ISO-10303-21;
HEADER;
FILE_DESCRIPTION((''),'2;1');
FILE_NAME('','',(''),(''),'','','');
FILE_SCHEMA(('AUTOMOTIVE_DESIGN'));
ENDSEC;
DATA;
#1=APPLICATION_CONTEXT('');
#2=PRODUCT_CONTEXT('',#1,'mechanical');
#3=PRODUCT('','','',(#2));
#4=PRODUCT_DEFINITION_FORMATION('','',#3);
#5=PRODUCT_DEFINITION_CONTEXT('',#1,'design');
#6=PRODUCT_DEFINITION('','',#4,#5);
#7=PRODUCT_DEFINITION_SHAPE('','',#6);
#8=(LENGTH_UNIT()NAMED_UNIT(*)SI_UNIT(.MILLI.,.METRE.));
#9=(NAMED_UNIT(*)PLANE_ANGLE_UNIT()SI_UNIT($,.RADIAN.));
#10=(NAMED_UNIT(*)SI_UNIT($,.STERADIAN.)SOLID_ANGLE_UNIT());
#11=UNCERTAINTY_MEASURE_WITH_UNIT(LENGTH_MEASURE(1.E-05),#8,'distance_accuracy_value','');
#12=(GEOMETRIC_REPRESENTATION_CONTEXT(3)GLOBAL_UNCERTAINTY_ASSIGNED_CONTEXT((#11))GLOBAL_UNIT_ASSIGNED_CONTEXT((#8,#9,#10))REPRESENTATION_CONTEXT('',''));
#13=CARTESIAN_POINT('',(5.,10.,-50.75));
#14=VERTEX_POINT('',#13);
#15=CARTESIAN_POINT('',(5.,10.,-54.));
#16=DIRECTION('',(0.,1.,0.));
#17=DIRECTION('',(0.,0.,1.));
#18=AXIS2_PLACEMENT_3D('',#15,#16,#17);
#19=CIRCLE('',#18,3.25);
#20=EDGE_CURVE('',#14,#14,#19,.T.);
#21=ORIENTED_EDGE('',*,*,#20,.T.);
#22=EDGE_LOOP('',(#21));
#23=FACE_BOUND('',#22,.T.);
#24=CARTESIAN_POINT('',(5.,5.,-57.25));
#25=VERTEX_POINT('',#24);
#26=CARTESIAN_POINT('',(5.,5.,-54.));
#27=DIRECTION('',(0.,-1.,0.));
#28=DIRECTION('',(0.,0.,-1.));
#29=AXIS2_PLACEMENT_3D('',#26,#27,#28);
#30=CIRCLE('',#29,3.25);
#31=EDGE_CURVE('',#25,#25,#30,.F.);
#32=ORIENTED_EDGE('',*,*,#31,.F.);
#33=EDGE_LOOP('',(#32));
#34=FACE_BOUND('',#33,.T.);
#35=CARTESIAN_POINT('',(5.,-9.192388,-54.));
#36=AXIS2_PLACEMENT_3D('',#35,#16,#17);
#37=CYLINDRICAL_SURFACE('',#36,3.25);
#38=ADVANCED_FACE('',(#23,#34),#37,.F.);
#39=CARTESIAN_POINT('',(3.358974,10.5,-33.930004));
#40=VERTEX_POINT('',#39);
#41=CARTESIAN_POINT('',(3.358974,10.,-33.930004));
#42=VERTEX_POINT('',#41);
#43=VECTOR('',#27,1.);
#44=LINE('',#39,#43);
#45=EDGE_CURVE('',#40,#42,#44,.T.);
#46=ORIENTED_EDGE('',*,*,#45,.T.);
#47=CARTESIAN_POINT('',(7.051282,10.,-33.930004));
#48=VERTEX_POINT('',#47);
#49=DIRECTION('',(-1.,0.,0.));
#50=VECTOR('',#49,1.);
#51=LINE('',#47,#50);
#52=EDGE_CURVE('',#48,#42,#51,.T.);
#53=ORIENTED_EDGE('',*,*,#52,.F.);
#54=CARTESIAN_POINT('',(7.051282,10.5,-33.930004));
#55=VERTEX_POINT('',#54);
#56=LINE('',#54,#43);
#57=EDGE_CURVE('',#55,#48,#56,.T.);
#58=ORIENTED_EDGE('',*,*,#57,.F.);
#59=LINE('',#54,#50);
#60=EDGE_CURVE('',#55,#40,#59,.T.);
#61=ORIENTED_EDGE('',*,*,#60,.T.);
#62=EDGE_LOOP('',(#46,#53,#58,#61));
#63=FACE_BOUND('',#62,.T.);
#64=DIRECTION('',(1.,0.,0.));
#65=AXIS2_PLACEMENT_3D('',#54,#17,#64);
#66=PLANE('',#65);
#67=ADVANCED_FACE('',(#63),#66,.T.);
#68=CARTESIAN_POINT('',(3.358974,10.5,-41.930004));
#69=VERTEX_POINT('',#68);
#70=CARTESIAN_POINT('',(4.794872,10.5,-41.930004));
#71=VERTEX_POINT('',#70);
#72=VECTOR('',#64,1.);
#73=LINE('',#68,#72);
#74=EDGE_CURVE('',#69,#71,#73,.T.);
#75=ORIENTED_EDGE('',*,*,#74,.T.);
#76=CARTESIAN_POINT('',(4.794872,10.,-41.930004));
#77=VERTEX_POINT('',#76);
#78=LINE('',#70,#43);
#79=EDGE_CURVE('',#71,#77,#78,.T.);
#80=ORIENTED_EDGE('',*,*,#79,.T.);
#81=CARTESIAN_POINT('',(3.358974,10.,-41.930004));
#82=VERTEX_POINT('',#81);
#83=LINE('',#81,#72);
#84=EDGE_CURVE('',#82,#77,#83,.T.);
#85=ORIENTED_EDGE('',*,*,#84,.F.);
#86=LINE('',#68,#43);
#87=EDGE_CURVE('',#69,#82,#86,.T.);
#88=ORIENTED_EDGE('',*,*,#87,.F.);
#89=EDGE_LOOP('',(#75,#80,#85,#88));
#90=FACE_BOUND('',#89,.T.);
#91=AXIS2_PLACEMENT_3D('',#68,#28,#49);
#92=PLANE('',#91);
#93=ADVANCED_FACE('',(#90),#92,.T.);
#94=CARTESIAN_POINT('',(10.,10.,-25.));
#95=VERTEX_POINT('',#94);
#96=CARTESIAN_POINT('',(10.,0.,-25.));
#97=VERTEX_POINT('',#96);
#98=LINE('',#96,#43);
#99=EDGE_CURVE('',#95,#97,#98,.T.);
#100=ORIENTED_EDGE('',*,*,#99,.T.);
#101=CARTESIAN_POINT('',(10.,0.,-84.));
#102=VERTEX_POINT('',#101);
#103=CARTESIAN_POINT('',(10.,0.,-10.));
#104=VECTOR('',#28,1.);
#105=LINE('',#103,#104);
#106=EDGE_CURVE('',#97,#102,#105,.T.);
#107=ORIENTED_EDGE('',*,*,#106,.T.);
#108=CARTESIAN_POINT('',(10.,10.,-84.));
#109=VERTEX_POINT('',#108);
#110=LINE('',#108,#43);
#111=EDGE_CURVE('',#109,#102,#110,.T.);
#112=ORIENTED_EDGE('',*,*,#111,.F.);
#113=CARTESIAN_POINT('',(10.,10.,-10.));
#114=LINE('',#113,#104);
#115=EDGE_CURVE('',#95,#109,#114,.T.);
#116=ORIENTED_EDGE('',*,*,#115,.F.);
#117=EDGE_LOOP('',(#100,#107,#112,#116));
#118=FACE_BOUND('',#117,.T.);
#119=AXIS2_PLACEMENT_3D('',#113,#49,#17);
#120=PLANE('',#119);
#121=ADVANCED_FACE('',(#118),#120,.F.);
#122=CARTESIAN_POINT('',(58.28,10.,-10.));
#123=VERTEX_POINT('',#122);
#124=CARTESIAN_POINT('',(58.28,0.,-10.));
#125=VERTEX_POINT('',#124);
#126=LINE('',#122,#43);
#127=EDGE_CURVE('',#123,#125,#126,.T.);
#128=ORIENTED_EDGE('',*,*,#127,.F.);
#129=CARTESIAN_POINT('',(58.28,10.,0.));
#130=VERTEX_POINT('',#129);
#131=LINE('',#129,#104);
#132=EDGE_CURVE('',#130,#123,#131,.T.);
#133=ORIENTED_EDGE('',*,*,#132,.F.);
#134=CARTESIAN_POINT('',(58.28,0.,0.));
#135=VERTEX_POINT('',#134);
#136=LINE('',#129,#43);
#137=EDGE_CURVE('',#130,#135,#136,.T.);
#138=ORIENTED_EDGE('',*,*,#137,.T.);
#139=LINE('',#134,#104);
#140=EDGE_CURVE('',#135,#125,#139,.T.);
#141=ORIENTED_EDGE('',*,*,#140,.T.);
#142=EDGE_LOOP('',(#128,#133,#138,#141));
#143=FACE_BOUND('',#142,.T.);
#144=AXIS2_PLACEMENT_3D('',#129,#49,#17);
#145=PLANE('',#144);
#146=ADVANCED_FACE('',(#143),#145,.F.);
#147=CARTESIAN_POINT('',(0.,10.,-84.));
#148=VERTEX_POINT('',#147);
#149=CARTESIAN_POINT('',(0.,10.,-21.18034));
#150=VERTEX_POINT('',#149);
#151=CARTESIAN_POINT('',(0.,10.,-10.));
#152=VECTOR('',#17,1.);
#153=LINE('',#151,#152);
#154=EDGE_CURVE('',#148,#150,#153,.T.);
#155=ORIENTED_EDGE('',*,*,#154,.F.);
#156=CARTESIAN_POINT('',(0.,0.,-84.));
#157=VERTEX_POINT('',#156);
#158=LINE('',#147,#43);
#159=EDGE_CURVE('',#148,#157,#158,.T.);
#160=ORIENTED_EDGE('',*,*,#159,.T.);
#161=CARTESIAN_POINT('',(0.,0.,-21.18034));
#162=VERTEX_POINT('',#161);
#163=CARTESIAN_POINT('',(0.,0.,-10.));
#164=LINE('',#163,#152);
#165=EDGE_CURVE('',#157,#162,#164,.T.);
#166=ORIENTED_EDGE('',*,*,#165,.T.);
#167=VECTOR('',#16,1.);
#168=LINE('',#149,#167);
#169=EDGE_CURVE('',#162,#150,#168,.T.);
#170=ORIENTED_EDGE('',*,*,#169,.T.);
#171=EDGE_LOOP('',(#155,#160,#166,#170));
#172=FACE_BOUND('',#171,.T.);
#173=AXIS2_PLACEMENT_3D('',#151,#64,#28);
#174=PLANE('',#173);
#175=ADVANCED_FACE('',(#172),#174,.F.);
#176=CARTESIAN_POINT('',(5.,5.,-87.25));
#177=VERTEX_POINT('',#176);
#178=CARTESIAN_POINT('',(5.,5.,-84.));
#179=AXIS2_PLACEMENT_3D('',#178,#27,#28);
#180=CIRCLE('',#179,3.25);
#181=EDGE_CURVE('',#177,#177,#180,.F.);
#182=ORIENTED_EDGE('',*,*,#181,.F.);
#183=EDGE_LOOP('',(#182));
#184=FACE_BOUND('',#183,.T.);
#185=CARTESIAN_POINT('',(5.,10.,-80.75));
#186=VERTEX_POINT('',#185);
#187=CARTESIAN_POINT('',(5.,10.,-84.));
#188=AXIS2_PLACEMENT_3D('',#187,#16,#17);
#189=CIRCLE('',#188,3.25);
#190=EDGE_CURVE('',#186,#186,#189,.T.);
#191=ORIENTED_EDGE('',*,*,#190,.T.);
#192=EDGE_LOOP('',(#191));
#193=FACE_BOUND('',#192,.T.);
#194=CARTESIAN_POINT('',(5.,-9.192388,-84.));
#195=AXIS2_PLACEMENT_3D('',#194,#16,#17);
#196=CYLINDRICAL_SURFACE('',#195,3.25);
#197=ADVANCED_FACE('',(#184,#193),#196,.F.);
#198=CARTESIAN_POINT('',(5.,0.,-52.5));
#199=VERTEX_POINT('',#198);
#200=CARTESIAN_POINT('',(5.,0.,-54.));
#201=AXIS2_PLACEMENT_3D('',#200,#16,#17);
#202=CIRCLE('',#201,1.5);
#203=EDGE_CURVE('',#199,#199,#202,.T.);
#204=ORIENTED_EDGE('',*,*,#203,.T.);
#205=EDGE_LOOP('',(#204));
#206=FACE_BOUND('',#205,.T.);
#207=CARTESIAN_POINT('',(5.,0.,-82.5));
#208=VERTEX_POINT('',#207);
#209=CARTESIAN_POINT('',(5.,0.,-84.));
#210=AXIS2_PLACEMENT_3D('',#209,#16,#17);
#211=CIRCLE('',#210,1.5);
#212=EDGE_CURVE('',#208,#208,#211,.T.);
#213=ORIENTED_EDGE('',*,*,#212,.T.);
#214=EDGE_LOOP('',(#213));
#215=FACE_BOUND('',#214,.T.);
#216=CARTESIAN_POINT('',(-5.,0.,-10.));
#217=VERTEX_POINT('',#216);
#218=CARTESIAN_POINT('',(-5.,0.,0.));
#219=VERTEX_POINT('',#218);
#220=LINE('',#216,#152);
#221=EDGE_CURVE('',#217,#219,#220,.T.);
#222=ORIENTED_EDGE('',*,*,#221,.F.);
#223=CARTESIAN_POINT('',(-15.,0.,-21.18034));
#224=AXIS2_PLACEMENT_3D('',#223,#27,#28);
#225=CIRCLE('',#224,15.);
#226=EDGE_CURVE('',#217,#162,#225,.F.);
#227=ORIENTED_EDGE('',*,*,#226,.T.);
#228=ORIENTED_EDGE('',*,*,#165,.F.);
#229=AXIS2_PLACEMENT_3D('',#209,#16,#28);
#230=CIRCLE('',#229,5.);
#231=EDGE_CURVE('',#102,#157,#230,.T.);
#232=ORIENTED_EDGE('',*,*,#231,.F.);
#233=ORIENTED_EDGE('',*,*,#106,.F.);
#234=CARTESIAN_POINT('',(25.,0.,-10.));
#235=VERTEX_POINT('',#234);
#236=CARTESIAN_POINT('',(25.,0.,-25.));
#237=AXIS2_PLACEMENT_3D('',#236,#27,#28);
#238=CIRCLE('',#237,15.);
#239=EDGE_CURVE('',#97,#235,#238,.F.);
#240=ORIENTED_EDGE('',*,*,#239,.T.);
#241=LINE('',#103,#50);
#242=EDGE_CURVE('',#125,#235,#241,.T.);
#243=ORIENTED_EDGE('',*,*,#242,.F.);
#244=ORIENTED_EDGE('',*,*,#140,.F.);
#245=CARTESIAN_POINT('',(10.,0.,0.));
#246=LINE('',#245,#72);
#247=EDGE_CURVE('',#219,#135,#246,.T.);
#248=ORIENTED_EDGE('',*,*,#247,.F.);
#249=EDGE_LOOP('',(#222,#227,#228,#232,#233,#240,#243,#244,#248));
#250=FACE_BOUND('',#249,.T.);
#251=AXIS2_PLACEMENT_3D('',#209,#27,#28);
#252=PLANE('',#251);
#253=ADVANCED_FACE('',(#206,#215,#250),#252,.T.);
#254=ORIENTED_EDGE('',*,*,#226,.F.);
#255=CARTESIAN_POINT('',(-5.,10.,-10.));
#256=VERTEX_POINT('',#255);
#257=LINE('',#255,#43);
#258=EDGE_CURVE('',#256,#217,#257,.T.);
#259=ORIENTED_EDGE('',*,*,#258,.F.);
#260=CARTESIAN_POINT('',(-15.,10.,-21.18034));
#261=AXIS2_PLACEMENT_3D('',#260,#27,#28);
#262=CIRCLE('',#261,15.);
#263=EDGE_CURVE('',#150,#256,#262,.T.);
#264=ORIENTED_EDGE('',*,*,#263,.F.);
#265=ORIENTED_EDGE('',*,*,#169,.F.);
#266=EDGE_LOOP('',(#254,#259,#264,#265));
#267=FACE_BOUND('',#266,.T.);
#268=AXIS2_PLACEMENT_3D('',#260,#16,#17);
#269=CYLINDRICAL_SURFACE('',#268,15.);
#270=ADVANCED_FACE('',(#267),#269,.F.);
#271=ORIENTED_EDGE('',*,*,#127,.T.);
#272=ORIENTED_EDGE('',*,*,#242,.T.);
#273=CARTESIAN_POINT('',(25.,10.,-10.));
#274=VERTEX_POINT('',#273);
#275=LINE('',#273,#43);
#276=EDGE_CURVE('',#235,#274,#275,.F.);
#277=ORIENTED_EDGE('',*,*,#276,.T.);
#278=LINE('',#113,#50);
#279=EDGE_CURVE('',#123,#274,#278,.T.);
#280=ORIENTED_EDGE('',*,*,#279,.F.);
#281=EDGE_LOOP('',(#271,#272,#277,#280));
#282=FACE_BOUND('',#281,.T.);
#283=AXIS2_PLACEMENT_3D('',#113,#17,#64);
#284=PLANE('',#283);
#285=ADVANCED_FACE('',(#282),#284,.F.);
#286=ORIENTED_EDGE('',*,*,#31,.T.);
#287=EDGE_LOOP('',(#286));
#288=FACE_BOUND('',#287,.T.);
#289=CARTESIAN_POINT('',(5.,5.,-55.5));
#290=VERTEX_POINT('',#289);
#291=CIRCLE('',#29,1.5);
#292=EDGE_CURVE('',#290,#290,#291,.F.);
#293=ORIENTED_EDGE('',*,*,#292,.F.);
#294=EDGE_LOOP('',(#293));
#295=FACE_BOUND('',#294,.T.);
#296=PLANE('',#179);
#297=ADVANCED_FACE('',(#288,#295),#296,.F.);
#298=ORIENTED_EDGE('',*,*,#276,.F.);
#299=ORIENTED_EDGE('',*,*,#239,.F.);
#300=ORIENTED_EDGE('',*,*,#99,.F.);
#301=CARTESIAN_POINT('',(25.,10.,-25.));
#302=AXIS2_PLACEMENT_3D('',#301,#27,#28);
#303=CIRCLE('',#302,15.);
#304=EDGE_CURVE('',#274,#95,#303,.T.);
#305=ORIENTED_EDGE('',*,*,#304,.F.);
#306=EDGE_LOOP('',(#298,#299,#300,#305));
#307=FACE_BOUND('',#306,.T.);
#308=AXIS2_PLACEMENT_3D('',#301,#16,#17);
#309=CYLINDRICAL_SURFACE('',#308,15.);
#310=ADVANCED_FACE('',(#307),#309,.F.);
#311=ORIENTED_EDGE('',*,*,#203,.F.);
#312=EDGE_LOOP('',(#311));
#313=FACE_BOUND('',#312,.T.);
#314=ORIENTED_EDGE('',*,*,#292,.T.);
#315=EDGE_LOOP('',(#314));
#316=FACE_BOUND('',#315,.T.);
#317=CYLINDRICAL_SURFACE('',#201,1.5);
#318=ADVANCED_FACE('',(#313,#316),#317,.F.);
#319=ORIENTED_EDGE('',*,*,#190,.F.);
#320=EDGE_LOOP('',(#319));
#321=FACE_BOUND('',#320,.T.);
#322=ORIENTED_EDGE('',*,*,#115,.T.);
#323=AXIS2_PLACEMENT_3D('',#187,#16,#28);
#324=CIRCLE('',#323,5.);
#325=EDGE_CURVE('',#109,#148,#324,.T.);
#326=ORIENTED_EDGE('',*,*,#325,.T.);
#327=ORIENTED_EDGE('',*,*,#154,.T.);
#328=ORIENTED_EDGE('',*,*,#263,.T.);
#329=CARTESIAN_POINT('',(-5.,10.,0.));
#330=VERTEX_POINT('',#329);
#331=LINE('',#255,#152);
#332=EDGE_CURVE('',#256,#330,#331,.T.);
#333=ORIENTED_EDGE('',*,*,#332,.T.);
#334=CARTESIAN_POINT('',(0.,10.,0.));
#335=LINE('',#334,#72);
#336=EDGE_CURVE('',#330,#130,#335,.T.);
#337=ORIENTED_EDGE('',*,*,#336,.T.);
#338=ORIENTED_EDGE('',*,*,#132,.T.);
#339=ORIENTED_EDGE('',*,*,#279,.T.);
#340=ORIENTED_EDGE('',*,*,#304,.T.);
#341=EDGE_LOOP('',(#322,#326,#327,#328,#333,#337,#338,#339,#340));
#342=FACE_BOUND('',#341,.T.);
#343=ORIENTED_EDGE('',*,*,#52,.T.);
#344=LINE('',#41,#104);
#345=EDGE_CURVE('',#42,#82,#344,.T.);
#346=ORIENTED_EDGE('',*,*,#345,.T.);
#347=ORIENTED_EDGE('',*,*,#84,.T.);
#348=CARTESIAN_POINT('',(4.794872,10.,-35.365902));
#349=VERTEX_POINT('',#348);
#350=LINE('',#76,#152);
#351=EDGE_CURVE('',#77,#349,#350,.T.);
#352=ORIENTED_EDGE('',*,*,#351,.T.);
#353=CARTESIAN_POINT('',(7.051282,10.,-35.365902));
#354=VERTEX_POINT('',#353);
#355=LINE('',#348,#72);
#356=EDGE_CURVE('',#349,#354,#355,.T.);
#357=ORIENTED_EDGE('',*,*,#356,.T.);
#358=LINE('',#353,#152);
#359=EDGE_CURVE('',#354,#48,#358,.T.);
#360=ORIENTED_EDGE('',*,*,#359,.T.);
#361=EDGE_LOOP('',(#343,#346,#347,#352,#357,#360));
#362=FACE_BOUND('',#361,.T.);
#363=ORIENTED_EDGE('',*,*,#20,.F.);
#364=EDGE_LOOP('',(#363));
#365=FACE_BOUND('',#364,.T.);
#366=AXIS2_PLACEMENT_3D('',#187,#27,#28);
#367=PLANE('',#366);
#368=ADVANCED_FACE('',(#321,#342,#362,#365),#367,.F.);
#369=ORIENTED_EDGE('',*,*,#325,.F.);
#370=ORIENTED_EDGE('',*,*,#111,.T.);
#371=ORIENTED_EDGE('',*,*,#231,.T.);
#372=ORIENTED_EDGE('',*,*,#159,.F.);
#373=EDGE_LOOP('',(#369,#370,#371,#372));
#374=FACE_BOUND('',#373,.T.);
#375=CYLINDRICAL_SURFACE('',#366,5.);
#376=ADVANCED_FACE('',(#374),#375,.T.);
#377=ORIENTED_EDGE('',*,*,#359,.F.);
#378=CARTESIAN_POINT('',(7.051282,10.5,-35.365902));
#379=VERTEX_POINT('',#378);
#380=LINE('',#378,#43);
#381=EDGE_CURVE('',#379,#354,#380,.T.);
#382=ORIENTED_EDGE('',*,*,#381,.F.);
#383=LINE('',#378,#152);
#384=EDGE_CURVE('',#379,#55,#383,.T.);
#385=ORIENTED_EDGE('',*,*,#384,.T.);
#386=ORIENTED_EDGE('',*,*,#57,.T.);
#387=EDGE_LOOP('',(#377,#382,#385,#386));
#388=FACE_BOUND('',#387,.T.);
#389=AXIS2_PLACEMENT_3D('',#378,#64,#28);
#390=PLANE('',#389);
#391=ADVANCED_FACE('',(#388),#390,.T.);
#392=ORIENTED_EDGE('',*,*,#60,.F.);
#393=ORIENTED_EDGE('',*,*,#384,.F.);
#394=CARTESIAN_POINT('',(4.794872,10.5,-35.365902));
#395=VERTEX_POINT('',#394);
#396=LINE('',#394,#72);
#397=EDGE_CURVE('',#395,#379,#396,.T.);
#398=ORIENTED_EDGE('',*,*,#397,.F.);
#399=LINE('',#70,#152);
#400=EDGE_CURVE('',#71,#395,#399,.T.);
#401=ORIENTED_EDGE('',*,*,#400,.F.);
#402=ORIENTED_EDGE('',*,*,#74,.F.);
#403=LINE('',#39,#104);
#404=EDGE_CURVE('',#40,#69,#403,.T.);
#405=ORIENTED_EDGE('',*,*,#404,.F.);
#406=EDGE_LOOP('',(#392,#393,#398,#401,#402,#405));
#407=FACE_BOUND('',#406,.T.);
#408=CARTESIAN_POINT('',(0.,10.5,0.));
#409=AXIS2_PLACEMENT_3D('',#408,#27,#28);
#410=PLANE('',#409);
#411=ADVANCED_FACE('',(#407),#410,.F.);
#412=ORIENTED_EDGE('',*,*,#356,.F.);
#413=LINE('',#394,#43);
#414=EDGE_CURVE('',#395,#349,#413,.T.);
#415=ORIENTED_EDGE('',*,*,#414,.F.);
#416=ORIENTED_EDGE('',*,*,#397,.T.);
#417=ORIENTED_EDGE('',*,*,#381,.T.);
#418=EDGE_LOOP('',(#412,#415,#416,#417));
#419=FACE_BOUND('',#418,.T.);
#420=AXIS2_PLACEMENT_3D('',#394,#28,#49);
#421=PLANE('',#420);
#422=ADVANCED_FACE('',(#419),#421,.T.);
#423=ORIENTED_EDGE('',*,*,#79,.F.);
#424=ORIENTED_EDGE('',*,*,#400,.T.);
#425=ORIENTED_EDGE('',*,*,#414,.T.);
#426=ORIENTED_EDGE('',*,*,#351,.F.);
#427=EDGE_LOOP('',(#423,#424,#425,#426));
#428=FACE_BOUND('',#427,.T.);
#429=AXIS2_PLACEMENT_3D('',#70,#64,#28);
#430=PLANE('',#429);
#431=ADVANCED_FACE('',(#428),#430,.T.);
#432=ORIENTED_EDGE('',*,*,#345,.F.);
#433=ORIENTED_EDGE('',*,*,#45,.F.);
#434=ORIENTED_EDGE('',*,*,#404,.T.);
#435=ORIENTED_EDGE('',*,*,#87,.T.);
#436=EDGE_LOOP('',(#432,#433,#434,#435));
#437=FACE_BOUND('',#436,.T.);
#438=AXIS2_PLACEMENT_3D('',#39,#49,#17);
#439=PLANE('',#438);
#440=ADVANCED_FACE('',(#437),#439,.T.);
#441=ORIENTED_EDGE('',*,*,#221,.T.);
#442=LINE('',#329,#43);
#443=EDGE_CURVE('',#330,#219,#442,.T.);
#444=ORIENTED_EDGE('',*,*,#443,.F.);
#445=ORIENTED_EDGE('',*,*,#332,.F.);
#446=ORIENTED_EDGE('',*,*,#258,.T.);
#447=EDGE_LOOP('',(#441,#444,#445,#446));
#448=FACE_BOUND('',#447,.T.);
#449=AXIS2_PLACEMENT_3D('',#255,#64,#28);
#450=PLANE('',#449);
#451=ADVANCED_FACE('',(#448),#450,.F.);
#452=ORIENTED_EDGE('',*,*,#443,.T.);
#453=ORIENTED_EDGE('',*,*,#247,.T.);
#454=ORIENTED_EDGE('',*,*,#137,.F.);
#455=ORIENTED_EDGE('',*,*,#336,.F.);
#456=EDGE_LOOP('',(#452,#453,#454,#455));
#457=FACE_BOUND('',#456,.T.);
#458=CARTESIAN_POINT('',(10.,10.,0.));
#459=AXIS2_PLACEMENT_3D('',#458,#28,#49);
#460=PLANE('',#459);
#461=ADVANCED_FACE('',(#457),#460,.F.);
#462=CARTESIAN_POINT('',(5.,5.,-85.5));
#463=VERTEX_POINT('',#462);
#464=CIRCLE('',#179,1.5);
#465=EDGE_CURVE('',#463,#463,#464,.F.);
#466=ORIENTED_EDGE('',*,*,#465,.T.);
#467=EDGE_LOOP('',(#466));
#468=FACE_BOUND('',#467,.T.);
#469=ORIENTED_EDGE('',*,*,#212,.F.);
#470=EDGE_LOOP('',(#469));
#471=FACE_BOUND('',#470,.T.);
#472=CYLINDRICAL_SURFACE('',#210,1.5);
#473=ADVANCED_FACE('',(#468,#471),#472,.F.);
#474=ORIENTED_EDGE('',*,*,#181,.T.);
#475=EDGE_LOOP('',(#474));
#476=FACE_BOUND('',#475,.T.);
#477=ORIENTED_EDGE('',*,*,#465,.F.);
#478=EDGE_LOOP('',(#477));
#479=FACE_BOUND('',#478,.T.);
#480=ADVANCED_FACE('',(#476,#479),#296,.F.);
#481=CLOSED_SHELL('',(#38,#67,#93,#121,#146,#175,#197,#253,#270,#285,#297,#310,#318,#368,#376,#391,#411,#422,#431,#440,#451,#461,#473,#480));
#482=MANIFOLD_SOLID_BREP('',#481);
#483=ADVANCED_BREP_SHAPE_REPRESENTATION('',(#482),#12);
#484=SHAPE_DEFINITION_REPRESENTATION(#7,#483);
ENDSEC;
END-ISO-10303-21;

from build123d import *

# Parameters (mm, degrees)
BOSS_EXTRUDE1_DEPTH = 10
SKETCH2_R           = 1.5
CUT_EXTRUDE1_DEPTH  = 107.852975625
BOSS_EXTRUDE2_DEPTH = 0.5
SKETCH5_R           = 3.25
CUT_EXTRUDE2_DEPTH  = 5
FILLET1_R           = 15


with BuildPart() as part:
    # Sketch1 → Boss-Extrude1 (new body)
    with BuildSketch(Plane(origin=(0, 0, 0), x_dir=(1, 0, 0), z_dir=(0, 1, 0))):
        with BuildLine():
            Line((0, 0), (10, 0))
            Line((10, 0), (58.28, 0))
            Line((58.28, 0), (58.28, 10))
            Line((58.28, 10), (10, 10))
            Line((10, 10), (10, 84))
            ThreePointArc((10, 84), (5, 89), (0, 84))
            Line((0, 84), (0, 10))
            Line((0, 10), (-5, 10))
            Line((-5, 10), (-5, 0))
            Line((-5, 0), (0, 0))
        make_face()
    extrude(amount=BOSS_EXTRUDE1_DEPTH)

    # Sketch2 → Cut-Extrude1 (cut, through all)
    with BuildSketch(Plane(origin=(0, 10, 0), x_dir=(1, 0, 0), z_dir=(0, 1, 0))):
        with Locations(Location((5, 84, 0), (0, 0, 270))):
            Circle(SKETCH2_R)
        with Locations(Location((5, 54, 0), (0, 0, 270))):
            Circle(SKETCH2_R)
    extrude(amount=-CUT_EXTRUDE1_DEPTH, mode=Mode.SUBTRACT)

    # Sketch4 → Boss-Extrude2 (add)
    with BuildSketch(Plane(origin=(0, 10, 0), x_dir=(1, 0, 0), z_dir=(0, 1, 0))):
        Polygon((3.358974359, 41.930004151), (4.794871795, 41.930004151), (4.794871795, 35.365901587), (7.051282051, 35.365901587), (7.051282051, 33.930004151), (3.358974359, 33.930004151), align=None)
    extrude(amount=BOSS_EXTRUDE2_DEPTH)

    # Sketch5 → Cut-Extrude2 (cut)
    with BuildSketch(Plane(origin=(0, 10, 0), x_dir=(1, 0, 0), z_dir=(0, 1, 0))):
        with Locations(Location((5, 84, 0), (0, 0, 270))):
            Circle(SKETCH5_R)
        with Locations(Location((5, 54, 0), (0, 0, 270))):
            Circle(SKETCH5_R)
    extrude(amount=-CUT_EXTRUDE2_DEPTH, mode=Mode.SUBTRACT)

    # Fillet1
    # the kernel refuses this fillet: 15 mm, written as the material it adds along each edge
    with BuildSketch(Plane(origin=(0, 0, -10), x_dir=(-1, 0, 0), z_dir=(0, 1, 0))) as fillet1_piece_1:
        with BuildLine():
            CenterArc((15, -11.180339887), FILLET1_R, 131.810314896, 48.189685104)
            Line((0, -11.180339887), (-0.3, -11.180339887))
            Line((-0.3, -11.180339887), (-0.3, 0))
            Line((-0.3, 0), (0, 0.3))
            ThreePointArc((0, 0.3), (2.5, 0.3), (4.8, 0.223606798))
            Line((4.8, 0.223606798), (5, 0))
        make_face()
    extrude(amount=10)
    with BuildSketch(Plane(origin=(10, 0, -10), x_dir=(1, 0, 0), z_dir=(0, 1, 0))) as fillet1_piece_2:
        with BuildLine():
            CenterArc((FILLET1_R, FILLET1_R), FILLET1_R, 180, 90)
            Line((0, FILLET1_R), (-FILLET1_R * 0.02, FILLET1_R))
            Line((-FILLET1_R * 0.02, FILLET1_R), (-FILLET1_R * 0.02, -FILLET1_R * 0.02))
            Line((-FILLET1_R * 0.02, -FILLET1_R * 0.02), (FILLET1_R, -FILLET1_R * 0.02))
            Line((FILLET1_R, -FILLET1_R * 0.02), (FILLET1_R, 0))
        make_face()
    extrude(amount=10)


solid = part.part
